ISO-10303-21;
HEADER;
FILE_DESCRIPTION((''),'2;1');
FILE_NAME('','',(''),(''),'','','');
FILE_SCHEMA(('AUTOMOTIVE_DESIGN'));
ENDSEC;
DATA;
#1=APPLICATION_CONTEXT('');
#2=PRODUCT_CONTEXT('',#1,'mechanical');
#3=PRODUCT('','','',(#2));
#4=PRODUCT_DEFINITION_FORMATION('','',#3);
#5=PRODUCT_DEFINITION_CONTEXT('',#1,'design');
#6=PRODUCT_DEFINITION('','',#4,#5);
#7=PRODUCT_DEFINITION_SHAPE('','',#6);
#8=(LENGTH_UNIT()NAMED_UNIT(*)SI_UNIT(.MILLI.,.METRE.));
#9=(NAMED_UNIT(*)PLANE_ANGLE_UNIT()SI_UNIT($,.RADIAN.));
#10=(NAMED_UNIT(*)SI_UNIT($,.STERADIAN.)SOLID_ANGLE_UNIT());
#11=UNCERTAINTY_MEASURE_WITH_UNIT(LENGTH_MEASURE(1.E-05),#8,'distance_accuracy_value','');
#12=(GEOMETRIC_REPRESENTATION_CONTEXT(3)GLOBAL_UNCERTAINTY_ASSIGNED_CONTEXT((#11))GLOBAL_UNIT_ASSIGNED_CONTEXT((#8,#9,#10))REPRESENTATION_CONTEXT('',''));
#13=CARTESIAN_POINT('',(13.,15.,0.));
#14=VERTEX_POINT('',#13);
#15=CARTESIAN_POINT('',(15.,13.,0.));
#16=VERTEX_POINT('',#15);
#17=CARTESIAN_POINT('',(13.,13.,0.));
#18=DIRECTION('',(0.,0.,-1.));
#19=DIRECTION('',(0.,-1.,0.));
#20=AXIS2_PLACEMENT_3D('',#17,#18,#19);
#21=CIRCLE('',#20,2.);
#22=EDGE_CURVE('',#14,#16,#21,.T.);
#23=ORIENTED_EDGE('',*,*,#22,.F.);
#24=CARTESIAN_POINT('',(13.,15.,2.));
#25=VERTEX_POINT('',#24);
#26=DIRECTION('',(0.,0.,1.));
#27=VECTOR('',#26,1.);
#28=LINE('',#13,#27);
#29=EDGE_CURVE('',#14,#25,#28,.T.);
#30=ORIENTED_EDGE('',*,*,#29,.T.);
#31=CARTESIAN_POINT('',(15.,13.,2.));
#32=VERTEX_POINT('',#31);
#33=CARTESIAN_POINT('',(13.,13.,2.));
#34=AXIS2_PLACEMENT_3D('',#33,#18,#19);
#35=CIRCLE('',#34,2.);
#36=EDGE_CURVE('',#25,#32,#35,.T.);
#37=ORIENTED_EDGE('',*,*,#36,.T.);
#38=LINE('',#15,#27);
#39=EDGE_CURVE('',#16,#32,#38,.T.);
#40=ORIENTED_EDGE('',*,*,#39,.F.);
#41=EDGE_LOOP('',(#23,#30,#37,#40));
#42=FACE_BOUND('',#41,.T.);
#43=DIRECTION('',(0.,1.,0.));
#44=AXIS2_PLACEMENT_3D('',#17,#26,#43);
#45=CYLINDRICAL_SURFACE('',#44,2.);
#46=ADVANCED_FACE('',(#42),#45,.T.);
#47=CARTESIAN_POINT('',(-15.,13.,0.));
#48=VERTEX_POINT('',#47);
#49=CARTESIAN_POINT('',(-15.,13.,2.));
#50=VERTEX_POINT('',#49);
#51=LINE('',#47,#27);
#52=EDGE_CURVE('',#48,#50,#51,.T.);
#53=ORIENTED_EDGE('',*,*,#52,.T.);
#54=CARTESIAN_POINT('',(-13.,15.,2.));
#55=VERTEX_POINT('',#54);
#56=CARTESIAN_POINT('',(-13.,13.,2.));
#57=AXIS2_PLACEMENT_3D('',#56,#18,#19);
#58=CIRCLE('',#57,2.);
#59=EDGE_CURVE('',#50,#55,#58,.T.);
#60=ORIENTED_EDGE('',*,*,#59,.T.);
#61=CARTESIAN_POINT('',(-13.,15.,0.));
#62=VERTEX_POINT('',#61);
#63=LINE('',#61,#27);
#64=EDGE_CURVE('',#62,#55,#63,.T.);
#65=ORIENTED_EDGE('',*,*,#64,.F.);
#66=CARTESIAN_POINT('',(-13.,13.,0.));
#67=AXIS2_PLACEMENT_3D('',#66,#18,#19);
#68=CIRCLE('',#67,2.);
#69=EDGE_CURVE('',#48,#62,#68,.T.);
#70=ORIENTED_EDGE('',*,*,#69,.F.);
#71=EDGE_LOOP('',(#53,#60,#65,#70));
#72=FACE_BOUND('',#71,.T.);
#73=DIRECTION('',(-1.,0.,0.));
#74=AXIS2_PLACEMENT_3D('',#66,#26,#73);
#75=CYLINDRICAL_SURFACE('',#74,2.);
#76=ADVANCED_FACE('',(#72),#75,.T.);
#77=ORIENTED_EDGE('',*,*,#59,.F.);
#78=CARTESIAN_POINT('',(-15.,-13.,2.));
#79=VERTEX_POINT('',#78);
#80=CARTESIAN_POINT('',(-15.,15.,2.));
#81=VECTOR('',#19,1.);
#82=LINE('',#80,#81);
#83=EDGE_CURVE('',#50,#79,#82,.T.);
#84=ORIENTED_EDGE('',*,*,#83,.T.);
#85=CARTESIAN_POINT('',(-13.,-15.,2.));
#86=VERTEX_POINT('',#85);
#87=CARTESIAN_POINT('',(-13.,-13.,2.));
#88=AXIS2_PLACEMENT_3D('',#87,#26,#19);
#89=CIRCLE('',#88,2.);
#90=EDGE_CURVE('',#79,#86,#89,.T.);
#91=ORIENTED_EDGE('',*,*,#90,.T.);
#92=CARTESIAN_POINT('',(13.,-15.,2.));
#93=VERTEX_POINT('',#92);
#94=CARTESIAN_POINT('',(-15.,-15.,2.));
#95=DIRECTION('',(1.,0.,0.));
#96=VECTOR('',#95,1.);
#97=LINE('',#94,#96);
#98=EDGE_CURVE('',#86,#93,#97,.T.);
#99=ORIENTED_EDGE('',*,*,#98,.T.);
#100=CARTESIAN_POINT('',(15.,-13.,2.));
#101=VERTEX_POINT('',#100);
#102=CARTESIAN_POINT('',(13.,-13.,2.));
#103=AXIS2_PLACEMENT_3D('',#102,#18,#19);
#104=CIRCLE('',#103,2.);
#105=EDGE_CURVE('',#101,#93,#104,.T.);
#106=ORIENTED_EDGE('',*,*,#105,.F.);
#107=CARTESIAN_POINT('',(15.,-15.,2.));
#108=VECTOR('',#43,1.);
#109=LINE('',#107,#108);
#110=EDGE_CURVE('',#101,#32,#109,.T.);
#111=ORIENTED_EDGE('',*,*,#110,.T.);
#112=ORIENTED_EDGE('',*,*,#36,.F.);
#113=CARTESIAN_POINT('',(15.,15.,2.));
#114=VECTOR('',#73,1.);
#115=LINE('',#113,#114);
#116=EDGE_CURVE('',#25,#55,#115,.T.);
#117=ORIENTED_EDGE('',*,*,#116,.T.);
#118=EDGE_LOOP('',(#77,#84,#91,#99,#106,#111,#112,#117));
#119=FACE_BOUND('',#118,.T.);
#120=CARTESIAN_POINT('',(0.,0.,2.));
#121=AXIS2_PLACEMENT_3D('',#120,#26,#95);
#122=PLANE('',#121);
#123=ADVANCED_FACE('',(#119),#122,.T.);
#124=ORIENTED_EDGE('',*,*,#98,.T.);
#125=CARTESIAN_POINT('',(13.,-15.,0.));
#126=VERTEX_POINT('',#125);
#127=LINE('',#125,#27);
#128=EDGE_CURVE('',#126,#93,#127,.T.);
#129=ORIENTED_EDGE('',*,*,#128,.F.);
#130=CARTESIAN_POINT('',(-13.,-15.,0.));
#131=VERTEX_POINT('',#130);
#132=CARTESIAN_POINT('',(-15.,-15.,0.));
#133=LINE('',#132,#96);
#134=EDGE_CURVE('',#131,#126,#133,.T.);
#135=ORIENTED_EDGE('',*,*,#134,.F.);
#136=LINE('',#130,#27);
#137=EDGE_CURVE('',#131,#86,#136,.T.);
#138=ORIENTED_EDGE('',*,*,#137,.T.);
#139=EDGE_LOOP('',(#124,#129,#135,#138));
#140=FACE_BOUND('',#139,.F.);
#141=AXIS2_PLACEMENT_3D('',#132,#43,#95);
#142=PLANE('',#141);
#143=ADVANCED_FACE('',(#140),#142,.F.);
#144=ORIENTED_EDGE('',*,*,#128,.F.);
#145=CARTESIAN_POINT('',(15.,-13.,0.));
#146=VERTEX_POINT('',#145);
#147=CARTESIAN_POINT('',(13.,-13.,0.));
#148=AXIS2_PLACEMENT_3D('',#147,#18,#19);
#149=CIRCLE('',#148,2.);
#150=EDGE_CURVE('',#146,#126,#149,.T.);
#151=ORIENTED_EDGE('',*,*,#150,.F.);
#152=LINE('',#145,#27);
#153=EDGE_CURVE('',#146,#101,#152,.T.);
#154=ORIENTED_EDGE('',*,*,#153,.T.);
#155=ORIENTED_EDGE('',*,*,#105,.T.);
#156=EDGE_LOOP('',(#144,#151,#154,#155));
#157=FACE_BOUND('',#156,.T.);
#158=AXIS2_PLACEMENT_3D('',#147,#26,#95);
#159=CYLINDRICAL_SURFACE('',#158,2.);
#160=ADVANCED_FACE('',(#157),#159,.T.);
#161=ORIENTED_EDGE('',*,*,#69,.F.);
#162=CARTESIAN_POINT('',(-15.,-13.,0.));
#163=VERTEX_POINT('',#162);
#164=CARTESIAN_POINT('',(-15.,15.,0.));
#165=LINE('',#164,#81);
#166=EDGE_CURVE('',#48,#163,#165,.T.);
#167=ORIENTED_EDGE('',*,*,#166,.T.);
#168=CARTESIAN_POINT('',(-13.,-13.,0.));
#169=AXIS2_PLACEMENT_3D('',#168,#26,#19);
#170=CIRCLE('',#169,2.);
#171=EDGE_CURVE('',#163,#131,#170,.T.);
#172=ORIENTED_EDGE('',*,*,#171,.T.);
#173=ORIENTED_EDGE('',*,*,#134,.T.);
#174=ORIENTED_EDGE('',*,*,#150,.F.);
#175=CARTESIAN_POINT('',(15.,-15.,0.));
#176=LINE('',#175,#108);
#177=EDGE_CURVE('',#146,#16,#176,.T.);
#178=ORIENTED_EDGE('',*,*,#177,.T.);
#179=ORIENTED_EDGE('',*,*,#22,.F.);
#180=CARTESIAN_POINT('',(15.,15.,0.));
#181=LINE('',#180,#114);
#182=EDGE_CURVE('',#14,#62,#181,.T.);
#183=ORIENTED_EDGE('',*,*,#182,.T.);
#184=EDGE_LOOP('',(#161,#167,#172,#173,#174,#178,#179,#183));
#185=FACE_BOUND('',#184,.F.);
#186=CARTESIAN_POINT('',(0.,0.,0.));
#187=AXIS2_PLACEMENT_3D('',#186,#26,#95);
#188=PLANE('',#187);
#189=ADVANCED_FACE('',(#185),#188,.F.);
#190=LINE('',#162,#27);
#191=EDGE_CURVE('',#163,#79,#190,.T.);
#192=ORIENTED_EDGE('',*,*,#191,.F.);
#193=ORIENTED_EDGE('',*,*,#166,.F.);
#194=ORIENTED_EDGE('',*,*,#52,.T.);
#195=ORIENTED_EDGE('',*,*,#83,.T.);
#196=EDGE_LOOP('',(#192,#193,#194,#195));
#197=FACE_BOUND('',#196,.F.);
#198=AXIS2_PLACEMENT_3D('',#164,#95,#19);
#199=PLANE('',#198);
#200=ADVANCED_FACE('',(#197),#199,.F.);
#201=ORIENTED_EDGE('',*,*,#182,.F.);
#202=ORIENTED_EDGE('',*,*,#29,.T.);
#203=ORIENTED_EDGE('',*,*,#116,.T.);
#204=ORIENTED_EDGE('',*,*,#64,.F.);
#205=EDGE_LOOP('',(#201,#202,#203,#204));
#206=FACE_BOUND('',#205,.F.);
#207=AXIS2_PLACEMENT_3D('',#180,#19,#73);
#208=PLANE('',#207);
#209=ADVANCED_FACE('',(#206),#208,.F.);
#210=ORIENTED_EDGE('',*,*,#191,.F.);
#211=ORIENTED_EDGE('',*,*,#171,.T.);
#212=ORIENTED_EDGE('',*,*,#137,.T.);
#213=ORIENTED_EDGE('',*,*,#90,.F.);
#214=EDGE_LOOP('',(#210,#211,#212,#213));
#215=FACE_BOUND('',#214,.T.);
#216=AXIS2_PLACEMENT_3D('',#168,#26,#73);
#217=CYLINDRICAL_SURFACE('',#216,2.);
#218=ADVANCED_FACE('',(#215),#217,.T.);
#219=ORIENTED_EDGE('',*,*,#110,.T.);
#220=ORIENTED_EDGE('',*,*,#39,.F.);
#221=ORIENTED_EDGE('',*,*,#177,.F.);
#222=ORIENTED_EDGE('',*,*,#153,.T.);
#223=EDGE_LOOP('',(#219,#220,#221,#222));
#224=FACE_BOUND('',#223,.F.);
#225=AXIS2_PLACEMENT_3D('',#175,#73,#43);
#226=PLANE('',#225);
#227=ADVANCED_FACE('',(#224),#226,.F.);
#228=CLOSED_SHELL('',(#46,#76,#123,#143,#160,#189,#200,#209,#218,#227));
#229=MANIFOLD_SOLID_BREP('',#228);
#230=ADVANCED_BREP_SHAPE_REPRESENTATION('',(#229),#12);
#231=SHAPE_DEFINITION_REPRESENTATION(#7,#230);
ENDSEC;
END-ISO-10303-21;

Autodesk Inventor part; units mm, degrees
ref_plane "YZ Plane" through (0, 0, 0) normal (1, 0, 0) x (0, 1, 0)
ref_plane "XZ Plane" through (0, 0, 0) normal (0, 1, 0) x (-1, 0, 0)
ref_plane "XY Plane" through (0, 0, 0) normal (0, 0, 1) x (1, 0, 0)
sketch "Sketch1" plane through (0, 0, 0) normal (0, 0, 1) x (1, 0, 0)
  line L0 (-15, -15) -> (15, -15)
  line L1 (15, -15) -> (15, 15)
  line L2 (15, 15) -> (-15, 15)
  line L3 (-15, 15) -> (-15, -15)
  line L4 (-15, -15) -> (15, 15) construction
  line L5 (15, -15) -> (-15, 15) construction
  point P0 (0, 0)
  dimension "d154" = 30
  dimension "d155" = 30
extrude "Plate5" add sketch "Sketch1" along normal blind 2
fillet "Corner Round1" radius 2 4 edges at (15, 15, 1) (-15, 15, 1) (-15, -15, 1) (15, -15, 1)
properties part number "APN 766 FDS 1200 CUP 1" material "Stainless Steel"
